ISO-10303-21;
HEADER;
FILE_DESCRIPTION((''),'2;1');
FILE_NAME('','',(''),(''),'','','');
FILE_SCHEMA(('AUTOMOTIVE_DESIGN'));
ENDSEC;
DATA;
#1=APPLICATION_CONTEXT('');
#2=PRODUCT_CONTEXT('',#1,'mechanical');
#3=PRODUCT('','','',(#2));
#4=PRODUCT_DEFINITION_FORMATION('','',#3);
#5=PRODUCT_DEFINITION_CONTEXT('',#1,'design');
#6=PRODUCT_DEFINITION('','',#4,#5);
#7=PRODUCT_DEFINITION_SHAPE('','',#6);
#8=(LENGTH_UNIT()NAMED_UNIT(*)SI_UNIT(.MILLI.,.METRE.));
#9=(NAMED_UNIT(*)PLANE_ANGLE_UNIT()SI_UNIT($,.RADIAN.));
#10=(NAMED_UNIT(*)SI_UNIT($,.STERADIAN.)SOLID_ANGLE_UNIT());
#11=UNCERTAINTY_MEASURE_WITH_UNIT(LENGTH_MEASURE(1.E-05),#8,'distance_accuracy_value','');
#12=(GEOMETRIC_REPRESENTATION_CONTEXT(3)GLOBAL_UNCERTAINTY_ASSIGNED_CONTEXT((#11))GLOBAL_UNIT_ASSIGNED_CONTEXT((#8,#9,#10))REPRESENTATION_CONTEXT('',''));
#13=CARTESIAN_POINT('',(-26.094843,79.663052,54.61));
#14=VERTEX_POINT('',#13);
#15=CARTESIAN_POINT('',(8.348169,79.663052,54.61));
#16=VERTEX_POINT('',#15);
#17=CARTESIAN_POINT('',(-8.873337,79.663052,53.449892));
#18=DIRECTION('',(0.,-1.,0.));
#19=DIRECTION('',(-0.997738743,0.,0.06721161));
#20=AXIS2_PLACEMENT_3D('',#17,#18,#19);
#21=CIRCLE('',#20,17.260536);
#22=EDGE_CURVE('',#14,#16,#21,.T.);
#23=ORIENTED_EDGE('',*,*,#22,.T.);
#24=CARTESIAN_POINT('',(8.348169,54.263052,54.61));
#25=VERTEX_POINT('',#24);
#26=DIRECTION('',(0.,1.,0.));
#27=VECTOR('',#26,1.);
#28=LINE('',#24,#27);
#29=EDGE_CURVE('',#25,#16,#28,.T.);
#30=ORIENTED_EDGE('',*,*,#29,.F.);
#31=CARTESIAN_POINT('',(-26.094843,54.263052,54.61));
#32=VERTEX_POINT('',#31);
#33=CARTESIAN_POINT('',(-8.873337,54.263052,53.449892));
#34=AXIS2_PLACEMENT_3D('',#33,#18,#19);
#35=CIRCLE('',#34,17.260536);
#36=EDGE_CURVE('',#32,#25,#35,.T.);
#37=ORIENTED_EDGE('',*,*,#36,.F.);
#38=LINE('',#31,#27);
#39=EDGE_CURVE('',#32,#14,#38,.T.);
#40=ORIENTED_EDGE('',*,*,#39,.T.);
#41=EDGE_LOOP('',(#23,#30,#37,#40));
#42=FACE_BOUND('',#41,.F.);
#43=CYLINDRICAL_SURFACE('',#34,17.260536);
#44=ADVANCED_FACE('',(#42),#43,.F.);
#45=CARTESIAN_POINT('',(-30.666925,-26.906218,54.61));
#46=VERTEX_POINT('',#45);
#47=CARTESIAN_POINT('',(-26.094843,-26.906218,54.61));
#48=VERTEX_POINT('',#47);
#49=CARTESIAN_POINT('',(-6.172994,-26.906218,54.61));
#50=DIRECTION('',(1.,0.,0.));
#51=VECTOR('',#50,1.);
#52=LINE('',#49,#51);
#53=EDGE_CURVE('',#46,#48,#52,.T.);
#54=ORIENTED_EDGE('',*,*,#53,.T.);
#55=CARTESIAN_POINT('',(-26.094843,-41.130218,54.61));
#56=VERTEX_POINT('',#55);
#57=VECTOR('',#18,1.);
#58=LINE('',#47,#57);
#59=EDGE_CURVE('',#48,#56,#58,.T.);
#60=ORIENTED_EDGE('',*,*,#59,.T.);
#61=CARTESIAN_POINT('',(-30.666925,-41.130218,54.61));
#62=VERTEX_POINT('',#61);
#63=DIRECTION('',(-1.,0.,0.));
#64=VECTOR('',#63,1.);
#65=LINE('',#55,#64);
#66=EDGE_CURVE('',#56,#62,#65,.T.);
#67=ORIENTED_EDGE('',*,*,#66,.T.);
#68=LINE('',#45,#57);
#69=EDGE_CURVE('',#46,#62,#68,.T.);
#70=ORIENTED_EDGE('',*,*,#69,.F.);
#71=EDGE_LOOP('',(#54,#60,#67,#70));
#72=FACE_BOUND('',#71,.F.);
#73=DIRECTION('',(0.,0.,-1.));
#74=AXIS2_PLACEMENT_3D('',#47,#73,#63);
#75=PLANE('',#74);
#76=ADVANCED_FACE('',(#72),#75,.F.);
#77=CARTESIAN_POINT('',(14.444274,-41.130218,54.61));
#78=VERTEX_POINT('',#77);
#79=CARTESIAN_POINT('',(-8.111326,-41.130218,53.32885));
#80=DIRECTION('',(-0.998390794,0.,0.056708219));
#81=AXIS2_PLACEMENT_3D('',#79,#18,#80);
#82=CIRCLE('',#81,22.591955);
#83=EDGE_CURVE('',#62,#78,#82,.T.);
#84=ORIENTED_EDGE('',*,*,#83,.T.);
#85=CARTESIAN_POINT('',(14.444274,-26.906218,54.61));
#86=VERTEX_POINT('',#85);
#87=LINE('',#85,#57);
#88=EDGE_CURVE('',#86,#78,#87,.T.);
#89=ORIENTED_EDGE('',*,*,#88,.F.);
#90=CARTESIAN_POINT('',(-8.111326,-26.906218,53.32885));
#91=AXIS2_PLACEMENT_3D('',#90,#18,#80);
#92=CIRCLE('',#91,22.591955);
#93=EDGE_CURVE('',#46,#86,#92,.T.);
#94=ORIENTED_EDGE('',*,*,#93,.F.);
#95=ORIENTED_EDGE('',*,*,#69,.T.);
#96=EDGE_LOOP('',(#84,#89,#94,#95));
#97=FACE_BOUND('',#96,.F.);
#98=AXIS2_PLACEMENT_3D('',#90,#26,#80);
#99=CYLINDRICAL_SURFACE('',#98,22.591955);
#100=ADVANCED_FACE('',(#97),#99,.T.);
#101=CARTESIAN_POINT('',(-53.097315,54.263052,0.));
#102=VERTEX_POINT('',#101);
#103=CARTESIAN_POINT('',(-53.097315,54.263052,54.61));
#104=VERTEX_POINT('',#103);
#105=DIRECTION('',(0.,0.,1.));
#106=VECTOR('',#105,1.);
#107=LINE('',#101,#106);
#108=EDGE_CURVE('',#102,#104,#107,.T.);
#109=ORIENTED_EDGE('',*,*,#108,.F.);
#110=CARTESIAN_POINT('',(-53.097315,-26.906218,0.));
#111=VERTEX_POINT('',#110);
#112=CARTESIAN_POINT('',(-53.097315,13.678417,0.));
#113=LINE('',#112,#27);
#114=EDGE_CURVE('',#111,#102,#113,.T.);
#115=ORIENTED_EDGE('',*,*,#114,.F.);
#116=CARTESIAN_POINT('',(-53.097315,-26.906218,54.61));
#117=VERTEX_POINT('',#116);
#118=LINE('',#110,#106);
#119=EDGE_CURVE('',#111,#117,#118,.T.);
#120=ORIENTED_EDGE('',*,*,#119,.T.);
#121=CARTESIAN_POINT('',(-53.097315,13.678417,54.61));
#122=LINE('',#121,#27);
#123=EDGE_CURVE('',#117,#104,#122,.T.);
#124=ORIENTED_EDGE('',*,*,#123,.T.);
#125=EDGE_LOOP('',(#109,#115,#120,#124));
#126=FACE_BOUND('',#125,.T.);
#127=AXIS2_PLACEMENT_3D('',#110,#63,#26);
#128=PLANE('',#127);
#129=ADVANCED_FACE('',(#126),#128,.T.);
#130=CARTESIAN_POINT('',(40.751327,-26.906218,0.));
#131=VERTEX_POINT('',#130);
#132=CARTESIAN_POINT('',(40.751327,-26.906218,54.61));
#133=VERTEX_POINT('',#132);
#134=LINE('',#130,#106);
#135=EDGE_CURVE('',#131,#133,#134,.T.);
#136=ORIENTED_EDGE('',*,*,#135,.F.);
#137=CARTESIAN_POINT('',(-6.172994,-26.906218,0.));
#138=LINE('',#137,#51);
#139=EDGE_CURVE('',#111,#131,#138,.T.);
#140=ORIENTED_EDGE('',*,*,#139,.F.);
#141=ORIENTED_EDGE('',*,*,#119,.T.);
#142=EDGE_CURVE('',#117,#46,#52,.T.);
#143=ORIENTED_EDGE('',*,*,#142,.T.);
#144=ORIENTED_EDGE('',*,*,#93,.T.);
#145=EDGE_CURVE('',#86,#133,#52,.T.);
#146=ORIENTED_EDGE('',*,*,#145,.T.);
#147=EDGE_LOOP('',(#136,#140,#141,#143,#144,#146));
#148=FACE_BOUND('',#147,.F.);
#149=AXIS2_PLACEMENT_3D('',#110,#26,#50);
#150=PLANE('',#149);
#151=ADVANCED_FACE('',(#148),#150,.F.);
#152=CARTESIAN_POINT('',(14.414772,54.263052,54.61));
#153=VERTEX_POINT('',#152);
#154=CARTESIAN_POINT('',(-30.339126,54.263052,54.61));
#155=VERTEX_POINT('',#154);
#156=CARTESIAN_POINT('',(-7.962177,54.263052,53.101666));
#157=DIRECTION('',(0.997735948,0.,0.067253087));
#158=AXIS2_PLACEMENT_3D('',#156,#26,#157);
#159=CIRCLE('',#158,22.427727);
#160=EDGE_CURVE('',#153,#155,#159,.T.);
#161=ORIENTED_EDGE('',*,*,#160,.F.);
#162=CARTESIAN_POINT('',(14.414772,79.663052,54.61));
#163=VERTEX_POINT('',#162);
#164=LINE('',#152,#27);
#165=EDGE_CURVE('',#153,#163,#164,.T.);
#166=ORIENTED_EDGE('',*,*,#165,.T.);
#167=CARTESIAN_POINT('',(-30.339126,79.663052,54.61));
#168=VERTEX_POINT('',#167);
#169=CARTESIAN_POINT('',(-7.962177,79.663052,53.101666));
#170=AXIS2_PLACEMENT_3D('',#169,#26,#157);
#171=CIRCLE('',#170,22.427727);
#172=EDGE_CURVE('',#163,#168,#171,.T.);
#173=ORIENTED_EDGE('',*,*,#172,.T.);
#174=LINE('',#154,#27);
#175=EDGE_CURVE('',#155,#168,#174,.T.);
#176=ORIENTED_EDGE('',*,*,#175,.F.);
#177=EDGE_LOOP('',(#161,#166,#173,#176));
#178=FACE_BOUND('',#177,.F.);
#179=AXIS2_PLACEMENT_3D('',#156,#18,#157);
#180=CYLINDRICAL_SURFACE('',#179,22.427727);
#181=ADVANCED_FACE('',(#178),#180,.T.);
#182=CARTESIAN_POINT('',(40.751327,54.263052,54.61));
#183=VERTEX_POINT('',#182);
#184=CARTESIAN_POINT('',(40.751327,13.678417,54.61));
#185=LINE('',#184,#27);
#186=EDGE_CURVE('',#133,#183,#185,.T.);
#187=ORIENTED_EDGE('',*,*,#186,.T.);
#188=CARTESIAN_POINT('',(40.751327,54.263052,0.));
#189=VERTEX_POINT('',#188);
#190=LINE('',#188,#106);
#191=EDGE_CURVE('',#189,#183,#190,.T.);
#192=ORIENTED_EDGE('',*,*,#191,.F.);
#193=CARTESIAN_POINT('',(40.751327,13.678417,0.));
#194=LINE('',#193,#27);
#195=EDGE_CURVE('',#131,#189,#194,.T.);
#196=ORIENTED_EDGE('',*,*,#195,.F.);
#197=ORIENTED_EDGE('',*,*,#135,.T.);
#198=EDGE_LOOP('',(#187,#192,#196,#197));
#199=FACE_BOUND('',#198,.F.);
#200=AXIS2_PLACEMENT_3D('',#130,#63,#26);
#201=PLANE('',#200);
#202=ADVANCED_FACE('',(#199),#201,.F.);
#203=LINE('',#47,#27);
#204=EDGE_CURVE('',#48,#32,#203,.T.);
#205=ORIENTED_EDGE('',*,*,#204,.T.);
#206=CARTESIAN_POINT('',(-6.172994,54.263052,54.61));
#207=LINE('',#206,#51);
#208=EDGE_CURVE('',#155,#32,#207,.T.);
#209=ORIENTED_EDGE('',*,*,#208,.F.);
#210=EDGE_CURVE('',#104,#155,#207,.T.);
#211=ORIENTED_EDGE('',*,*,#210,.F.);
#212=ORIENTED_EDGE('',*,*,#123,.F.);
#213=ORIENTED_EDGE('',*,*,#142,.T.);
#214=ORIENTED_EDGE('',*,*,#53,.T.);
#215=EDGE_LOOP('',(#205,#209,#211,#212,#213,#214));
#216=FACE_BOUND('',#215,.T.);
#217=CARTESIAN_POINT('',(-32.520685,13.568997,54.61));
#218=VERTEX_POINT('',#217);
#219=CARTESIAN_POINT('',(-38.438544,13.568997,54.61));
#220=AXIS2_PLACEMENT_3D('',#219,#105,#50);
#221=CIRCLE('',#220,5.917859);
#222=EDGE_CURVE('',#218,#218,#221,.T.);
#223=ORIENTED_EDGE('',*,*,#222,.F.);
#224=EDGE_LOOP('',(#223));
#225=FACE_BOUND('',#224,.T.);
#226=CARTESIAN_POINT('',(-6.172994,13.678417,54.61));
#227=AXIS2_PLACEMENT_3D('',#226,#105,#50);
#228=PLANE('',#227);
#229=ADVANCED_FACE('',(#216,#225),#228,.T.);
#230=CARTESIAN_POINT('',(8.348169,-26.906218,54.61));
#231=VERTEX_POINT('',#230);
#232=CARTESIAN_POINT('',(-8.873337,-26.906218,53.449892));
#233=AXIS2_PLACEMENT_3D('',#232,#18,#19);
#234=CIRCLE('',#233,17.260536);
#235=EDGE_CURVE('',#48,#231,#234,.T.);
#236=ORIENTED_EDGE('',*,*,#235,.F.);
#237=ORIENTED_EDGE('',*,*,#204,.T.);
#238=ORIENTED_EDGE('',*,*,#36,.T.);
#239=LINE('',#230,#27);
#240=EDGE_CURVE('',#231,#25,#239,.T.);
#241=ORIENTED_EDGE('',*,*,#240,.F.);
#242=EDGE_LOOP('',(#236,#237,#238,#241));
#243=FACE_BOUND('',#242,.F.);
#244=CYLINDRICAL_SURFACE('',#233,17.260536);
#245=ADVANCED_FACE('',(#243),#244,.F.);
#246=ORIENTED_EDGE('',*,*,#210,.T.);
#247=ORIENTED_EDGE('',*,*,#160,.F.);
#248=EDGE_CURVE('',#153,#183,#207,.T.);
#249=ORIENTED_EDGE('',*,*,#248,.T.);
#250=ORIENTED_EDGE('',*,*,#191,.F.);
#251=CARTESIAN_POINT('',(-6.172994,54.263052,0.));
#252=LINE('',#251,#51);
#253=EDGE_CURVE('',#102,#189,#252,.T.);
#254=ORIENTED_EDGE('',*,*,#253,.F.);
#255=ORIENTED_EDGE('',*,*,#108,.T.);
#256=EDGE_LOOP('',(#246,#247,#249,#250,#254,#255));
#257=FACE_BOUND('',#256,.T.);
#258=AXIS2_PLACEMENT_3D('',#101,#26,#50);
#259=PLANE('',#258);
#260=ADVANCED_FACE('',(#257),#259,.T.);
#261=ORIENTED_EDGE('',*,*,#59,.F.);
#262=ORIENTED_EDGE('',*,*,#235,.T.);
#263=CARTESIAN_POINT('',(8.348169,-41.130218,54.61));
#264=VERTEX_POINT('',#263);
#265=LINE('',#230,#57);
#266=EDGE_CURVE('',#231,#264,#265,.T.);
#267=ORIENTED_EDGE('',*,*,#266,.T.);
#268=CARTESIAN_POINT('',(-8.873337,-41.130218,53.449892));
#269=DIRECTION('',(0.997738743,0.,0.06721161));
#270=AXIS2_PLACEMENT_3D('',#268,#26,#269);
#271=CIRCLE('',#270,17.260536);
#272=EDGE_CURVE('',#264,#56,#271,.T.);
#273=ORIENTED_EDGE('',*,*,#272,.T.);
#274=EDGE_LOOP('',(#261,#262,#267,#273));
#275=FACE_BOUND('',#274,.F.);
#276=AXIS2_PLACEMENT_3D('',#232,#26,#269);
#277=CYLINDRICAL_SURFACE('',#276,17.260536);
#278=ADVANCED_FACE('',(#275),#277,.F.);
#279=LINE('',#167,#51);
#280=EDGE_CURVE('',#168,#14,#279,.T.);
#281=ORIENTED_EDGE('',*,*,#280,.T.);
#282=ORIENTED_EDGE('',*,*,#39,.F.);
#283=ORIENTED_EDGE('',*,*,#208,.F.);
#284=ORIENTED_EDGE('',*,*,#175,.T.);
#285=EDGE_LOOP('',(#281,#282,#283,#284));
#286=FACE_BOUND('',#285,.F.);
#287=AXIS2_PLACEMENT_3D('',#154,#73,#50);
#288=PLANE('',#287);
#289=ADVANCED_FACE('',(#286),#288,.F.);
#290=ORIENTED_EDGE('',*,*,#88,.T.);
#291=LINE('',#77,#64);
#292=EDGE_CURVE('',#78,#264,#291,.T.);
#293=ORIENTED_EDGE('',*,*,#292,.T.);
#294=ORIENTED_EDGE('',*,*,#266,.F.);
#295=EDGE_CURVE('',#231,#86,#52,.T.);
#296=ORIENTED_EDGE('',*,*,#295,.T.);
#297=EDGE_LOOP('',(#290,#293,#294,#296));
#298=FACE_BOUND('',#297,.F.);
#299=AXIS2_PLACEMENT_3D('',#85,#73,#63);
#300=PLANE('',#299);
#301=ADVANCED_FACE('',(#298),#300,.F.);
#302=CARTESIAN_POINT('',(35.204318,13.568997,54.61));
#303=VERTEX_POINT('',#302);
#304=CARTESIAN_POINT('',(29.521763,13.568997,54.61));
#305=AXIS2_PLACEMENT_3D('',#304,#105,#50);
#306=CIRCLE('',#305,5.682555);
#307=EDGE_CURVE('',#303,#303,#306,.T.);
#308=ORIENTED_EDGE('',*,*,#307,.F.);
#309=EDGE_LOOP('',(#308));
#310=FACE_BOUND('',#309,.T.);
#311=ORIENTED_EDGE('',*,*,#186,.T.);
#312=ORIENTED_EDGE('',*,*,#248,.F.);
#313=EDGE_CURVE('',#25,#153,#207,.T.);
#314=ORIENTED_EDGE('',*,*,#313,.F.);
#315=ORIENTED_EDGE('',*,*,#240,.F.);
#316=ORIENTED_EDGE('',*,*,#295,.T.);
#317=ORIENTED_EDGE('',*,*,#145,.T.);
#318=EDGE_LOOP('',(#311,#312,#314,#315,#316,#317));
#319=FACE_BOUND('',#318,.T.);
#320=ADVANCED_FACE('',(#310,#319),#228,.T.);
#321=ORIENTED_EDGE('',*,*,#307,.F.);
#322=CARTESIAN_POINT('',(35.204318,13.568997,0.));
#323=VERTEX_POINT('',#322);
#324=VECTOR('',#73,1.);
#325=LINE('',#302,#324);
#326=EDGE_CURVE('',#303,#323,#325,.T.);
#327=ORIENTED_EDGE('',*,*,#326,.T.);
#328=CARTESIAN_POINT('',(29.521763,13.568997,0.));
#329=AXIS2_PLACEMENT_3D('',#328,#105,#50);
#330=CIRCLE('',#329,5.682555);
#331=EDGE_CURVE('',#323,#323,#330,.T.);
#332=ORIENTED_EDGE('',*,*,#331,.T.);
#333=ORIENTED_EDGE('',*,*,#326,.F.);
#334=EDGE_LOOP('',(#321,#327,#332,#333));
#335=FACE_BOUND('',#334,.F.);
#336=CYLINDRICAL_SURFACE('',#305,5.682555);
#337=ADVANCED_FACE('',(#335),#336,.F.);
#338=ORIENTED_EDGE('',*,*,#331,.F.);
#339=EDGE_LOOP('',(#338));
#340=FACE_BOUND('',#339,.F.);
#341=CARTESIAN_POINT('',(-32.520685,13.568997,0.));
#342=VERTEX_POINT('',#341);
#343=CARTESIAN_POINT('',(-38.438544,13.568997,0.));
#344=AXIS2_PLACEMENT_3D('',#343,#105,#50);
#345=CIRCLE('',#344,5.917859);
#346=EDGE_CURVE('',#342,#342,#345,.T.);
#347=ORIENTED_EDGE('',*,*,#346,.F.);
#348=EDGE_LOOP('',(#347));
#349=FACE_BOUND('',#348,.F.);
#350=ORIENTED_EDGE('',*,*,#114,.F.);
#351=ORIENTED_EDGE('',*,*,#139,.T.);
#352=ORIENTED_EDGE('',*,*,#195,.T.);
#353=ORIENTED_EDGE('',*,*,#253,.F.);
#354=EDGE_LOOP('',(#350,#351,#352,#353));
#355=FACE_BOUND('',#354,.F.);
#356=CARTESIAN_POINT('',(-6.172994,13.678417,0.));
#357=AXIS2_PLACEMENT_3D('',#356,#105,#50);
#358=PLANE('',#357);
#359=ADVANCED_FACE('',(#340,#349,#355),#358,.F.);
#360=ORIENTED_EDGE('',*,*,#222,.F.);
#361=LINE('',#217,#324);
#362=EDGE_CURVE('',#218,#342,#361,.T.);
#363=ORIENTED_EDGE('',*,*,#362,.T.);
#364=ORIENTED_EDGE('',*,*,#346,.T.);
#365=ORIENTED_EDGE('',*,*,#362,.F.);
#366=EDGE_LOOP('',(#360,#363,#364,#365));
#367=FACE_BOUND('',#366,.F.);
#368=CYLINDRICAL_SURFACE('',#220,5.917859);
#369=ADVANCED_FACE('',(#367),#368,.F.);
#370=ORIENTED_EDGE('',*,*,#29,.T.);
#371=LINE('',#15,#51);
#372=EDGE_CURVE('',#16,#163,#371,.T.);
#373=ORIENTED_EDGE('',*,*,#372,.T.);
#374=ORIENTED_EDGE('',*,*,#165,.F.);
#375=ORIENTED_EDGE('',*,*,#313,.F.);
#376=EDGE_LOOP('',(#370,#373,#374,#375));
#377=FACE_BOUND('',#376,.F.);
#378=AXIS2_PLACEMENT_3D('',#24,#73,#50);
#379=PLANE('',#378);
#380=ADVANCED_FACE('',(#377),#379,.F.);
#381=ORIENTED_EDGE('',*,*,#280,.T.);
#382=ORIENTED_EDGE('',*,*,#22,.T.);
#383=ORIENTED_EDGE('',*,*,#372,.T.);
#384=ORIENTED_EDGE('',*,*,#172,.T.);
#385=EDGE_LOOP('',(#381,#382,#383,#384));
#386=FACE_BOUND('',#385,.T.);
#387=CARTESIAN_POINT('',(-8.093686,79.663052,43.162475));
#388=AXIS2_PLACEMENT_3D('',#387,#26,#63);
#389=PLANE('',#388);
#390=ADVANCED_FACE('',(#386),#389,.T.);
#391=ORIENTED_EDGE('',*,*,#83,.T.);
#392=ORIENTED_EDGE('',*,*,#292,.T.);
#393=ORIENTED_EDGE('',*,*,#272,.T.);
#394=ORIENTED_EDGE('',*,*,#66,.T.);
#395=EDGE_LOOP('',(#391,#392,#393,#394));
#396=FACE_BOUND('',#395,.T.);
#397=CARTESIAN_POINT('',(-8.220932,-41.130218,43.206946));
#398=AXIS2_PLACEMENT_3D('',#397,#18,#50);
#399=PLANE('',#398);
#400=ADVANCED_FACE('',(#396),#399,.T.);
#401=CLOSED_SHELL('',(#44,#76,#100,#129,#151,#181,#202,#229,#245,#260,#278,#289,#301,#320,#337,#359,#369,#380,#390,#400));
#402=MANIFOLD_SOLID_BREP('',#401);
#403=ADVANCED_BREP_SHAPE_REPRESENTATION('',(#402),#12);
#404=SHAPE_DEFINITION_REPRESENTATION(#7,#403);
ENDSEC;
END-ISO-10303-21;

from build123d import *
from build123d import SkipClean  # not in build123d's __all__

# Parameters (mm, degrees)
F0_W     = 93.8486419618
F0_H     = 81.169269979
F1_DEPTH = 54.61
F3_DEPTH = 106.426
F4_DEPTH = 14.224
F6_DEPTH = 25.4
F7_R     = 5.6825549867
F7_R_2   = 5.9178586753
F8_DEPTH = 85.598


# Not quite as in the source:
# - after a boolean that leaves OpenCascade's solid faulty, fix() repairs it


with BuildPart() as f1:
    # F0 (on Top) → F1 (new body)
    with BuildSketch(Plane.XY):
        with Locations((-6.1729941517, 13.6784166098)):
            Rectangle(F0_W, F0_H)
    extrude(amount=F1_DEPTH)

    # F2 (on face) → F3 (cut)
    with BuildSketch(Plane.XZ.offset(26.9062183797)):
        with BuildLine():
            Line((8.3481688052, 54.61), (-26.0948427022, 54.61))
            ThreePointArc((-26.0948427022, 54.61), (-8.8733369485, 36.1893553029), (8.3481688052, 54.61))
        make_face()
    extrude(amount=-F3_DEPTH, mode=Mode.SUBTRACT)

    # F2 (on face) → F4 (join)
    with BuildSketch(Plane.XZ.offset(26.9062183797)):
        with BuildLine():
            Line((-26.0948427022, 54.61), (-30.6669250131, 54.61))
            ThreePointArc((-30.6669250131, 54.61), (-8.1113255583, 30.7368959369), (14.4442738965, 54.61))
            Line((14.4442738965, 54.61), (8.3481688052, 54.61))
            ThreePointArc((8.3481688052, 54.61), (-8.8733369485, 36.1893553029), (-26.0948427022, 54.61))
        make_face()
    with SkipClean():  # cleaning this boolean's faces spoils the solid; the shape is the same uncleaned
        extrude(amount=F4_DEPTH)

    # F5 (on face) → F6 (join)
    with BuildSketch(Plane(origin=(0, 54.2630515993, 0), x_dir=(-1, 0, 0), z_dir=(0, 1, 0))):
        with BuildLine():
            Line((-8.3481688052, 54.61), (-14.4147723913, 54.61))
            ThreePointArc((-14.4147723913, 54.61), (7.9621765763, 30.6739396567), (30.3391255438, 54.61))
            Line((30.3391255438, 54.61), (26.0948427022, 54.61))
            ThreePointArc((26.0948427022, 54.61), (8.8733369485, 36.1893553029), (-8.3481688052, 54.61))
        make_face()
    extrude(amount=F6_DEPTH)

    add(f1.part.fix(), mode=Mode.REPLACE)

    # F7 (on face) → F8 (cut)
    with BuildSketch(Plane.XY.offset(54.61)):
        with Locations((29.5217633247, 13.5689973831)):
            Circle(F7_R)
        with Locations((-38.4385436773, 13.5689973831)):
            Circle(F7_R_2)
    extrude(amount=-F8_DEPTH, mode=Mode.SUBTRACT)


solid = f1.part
